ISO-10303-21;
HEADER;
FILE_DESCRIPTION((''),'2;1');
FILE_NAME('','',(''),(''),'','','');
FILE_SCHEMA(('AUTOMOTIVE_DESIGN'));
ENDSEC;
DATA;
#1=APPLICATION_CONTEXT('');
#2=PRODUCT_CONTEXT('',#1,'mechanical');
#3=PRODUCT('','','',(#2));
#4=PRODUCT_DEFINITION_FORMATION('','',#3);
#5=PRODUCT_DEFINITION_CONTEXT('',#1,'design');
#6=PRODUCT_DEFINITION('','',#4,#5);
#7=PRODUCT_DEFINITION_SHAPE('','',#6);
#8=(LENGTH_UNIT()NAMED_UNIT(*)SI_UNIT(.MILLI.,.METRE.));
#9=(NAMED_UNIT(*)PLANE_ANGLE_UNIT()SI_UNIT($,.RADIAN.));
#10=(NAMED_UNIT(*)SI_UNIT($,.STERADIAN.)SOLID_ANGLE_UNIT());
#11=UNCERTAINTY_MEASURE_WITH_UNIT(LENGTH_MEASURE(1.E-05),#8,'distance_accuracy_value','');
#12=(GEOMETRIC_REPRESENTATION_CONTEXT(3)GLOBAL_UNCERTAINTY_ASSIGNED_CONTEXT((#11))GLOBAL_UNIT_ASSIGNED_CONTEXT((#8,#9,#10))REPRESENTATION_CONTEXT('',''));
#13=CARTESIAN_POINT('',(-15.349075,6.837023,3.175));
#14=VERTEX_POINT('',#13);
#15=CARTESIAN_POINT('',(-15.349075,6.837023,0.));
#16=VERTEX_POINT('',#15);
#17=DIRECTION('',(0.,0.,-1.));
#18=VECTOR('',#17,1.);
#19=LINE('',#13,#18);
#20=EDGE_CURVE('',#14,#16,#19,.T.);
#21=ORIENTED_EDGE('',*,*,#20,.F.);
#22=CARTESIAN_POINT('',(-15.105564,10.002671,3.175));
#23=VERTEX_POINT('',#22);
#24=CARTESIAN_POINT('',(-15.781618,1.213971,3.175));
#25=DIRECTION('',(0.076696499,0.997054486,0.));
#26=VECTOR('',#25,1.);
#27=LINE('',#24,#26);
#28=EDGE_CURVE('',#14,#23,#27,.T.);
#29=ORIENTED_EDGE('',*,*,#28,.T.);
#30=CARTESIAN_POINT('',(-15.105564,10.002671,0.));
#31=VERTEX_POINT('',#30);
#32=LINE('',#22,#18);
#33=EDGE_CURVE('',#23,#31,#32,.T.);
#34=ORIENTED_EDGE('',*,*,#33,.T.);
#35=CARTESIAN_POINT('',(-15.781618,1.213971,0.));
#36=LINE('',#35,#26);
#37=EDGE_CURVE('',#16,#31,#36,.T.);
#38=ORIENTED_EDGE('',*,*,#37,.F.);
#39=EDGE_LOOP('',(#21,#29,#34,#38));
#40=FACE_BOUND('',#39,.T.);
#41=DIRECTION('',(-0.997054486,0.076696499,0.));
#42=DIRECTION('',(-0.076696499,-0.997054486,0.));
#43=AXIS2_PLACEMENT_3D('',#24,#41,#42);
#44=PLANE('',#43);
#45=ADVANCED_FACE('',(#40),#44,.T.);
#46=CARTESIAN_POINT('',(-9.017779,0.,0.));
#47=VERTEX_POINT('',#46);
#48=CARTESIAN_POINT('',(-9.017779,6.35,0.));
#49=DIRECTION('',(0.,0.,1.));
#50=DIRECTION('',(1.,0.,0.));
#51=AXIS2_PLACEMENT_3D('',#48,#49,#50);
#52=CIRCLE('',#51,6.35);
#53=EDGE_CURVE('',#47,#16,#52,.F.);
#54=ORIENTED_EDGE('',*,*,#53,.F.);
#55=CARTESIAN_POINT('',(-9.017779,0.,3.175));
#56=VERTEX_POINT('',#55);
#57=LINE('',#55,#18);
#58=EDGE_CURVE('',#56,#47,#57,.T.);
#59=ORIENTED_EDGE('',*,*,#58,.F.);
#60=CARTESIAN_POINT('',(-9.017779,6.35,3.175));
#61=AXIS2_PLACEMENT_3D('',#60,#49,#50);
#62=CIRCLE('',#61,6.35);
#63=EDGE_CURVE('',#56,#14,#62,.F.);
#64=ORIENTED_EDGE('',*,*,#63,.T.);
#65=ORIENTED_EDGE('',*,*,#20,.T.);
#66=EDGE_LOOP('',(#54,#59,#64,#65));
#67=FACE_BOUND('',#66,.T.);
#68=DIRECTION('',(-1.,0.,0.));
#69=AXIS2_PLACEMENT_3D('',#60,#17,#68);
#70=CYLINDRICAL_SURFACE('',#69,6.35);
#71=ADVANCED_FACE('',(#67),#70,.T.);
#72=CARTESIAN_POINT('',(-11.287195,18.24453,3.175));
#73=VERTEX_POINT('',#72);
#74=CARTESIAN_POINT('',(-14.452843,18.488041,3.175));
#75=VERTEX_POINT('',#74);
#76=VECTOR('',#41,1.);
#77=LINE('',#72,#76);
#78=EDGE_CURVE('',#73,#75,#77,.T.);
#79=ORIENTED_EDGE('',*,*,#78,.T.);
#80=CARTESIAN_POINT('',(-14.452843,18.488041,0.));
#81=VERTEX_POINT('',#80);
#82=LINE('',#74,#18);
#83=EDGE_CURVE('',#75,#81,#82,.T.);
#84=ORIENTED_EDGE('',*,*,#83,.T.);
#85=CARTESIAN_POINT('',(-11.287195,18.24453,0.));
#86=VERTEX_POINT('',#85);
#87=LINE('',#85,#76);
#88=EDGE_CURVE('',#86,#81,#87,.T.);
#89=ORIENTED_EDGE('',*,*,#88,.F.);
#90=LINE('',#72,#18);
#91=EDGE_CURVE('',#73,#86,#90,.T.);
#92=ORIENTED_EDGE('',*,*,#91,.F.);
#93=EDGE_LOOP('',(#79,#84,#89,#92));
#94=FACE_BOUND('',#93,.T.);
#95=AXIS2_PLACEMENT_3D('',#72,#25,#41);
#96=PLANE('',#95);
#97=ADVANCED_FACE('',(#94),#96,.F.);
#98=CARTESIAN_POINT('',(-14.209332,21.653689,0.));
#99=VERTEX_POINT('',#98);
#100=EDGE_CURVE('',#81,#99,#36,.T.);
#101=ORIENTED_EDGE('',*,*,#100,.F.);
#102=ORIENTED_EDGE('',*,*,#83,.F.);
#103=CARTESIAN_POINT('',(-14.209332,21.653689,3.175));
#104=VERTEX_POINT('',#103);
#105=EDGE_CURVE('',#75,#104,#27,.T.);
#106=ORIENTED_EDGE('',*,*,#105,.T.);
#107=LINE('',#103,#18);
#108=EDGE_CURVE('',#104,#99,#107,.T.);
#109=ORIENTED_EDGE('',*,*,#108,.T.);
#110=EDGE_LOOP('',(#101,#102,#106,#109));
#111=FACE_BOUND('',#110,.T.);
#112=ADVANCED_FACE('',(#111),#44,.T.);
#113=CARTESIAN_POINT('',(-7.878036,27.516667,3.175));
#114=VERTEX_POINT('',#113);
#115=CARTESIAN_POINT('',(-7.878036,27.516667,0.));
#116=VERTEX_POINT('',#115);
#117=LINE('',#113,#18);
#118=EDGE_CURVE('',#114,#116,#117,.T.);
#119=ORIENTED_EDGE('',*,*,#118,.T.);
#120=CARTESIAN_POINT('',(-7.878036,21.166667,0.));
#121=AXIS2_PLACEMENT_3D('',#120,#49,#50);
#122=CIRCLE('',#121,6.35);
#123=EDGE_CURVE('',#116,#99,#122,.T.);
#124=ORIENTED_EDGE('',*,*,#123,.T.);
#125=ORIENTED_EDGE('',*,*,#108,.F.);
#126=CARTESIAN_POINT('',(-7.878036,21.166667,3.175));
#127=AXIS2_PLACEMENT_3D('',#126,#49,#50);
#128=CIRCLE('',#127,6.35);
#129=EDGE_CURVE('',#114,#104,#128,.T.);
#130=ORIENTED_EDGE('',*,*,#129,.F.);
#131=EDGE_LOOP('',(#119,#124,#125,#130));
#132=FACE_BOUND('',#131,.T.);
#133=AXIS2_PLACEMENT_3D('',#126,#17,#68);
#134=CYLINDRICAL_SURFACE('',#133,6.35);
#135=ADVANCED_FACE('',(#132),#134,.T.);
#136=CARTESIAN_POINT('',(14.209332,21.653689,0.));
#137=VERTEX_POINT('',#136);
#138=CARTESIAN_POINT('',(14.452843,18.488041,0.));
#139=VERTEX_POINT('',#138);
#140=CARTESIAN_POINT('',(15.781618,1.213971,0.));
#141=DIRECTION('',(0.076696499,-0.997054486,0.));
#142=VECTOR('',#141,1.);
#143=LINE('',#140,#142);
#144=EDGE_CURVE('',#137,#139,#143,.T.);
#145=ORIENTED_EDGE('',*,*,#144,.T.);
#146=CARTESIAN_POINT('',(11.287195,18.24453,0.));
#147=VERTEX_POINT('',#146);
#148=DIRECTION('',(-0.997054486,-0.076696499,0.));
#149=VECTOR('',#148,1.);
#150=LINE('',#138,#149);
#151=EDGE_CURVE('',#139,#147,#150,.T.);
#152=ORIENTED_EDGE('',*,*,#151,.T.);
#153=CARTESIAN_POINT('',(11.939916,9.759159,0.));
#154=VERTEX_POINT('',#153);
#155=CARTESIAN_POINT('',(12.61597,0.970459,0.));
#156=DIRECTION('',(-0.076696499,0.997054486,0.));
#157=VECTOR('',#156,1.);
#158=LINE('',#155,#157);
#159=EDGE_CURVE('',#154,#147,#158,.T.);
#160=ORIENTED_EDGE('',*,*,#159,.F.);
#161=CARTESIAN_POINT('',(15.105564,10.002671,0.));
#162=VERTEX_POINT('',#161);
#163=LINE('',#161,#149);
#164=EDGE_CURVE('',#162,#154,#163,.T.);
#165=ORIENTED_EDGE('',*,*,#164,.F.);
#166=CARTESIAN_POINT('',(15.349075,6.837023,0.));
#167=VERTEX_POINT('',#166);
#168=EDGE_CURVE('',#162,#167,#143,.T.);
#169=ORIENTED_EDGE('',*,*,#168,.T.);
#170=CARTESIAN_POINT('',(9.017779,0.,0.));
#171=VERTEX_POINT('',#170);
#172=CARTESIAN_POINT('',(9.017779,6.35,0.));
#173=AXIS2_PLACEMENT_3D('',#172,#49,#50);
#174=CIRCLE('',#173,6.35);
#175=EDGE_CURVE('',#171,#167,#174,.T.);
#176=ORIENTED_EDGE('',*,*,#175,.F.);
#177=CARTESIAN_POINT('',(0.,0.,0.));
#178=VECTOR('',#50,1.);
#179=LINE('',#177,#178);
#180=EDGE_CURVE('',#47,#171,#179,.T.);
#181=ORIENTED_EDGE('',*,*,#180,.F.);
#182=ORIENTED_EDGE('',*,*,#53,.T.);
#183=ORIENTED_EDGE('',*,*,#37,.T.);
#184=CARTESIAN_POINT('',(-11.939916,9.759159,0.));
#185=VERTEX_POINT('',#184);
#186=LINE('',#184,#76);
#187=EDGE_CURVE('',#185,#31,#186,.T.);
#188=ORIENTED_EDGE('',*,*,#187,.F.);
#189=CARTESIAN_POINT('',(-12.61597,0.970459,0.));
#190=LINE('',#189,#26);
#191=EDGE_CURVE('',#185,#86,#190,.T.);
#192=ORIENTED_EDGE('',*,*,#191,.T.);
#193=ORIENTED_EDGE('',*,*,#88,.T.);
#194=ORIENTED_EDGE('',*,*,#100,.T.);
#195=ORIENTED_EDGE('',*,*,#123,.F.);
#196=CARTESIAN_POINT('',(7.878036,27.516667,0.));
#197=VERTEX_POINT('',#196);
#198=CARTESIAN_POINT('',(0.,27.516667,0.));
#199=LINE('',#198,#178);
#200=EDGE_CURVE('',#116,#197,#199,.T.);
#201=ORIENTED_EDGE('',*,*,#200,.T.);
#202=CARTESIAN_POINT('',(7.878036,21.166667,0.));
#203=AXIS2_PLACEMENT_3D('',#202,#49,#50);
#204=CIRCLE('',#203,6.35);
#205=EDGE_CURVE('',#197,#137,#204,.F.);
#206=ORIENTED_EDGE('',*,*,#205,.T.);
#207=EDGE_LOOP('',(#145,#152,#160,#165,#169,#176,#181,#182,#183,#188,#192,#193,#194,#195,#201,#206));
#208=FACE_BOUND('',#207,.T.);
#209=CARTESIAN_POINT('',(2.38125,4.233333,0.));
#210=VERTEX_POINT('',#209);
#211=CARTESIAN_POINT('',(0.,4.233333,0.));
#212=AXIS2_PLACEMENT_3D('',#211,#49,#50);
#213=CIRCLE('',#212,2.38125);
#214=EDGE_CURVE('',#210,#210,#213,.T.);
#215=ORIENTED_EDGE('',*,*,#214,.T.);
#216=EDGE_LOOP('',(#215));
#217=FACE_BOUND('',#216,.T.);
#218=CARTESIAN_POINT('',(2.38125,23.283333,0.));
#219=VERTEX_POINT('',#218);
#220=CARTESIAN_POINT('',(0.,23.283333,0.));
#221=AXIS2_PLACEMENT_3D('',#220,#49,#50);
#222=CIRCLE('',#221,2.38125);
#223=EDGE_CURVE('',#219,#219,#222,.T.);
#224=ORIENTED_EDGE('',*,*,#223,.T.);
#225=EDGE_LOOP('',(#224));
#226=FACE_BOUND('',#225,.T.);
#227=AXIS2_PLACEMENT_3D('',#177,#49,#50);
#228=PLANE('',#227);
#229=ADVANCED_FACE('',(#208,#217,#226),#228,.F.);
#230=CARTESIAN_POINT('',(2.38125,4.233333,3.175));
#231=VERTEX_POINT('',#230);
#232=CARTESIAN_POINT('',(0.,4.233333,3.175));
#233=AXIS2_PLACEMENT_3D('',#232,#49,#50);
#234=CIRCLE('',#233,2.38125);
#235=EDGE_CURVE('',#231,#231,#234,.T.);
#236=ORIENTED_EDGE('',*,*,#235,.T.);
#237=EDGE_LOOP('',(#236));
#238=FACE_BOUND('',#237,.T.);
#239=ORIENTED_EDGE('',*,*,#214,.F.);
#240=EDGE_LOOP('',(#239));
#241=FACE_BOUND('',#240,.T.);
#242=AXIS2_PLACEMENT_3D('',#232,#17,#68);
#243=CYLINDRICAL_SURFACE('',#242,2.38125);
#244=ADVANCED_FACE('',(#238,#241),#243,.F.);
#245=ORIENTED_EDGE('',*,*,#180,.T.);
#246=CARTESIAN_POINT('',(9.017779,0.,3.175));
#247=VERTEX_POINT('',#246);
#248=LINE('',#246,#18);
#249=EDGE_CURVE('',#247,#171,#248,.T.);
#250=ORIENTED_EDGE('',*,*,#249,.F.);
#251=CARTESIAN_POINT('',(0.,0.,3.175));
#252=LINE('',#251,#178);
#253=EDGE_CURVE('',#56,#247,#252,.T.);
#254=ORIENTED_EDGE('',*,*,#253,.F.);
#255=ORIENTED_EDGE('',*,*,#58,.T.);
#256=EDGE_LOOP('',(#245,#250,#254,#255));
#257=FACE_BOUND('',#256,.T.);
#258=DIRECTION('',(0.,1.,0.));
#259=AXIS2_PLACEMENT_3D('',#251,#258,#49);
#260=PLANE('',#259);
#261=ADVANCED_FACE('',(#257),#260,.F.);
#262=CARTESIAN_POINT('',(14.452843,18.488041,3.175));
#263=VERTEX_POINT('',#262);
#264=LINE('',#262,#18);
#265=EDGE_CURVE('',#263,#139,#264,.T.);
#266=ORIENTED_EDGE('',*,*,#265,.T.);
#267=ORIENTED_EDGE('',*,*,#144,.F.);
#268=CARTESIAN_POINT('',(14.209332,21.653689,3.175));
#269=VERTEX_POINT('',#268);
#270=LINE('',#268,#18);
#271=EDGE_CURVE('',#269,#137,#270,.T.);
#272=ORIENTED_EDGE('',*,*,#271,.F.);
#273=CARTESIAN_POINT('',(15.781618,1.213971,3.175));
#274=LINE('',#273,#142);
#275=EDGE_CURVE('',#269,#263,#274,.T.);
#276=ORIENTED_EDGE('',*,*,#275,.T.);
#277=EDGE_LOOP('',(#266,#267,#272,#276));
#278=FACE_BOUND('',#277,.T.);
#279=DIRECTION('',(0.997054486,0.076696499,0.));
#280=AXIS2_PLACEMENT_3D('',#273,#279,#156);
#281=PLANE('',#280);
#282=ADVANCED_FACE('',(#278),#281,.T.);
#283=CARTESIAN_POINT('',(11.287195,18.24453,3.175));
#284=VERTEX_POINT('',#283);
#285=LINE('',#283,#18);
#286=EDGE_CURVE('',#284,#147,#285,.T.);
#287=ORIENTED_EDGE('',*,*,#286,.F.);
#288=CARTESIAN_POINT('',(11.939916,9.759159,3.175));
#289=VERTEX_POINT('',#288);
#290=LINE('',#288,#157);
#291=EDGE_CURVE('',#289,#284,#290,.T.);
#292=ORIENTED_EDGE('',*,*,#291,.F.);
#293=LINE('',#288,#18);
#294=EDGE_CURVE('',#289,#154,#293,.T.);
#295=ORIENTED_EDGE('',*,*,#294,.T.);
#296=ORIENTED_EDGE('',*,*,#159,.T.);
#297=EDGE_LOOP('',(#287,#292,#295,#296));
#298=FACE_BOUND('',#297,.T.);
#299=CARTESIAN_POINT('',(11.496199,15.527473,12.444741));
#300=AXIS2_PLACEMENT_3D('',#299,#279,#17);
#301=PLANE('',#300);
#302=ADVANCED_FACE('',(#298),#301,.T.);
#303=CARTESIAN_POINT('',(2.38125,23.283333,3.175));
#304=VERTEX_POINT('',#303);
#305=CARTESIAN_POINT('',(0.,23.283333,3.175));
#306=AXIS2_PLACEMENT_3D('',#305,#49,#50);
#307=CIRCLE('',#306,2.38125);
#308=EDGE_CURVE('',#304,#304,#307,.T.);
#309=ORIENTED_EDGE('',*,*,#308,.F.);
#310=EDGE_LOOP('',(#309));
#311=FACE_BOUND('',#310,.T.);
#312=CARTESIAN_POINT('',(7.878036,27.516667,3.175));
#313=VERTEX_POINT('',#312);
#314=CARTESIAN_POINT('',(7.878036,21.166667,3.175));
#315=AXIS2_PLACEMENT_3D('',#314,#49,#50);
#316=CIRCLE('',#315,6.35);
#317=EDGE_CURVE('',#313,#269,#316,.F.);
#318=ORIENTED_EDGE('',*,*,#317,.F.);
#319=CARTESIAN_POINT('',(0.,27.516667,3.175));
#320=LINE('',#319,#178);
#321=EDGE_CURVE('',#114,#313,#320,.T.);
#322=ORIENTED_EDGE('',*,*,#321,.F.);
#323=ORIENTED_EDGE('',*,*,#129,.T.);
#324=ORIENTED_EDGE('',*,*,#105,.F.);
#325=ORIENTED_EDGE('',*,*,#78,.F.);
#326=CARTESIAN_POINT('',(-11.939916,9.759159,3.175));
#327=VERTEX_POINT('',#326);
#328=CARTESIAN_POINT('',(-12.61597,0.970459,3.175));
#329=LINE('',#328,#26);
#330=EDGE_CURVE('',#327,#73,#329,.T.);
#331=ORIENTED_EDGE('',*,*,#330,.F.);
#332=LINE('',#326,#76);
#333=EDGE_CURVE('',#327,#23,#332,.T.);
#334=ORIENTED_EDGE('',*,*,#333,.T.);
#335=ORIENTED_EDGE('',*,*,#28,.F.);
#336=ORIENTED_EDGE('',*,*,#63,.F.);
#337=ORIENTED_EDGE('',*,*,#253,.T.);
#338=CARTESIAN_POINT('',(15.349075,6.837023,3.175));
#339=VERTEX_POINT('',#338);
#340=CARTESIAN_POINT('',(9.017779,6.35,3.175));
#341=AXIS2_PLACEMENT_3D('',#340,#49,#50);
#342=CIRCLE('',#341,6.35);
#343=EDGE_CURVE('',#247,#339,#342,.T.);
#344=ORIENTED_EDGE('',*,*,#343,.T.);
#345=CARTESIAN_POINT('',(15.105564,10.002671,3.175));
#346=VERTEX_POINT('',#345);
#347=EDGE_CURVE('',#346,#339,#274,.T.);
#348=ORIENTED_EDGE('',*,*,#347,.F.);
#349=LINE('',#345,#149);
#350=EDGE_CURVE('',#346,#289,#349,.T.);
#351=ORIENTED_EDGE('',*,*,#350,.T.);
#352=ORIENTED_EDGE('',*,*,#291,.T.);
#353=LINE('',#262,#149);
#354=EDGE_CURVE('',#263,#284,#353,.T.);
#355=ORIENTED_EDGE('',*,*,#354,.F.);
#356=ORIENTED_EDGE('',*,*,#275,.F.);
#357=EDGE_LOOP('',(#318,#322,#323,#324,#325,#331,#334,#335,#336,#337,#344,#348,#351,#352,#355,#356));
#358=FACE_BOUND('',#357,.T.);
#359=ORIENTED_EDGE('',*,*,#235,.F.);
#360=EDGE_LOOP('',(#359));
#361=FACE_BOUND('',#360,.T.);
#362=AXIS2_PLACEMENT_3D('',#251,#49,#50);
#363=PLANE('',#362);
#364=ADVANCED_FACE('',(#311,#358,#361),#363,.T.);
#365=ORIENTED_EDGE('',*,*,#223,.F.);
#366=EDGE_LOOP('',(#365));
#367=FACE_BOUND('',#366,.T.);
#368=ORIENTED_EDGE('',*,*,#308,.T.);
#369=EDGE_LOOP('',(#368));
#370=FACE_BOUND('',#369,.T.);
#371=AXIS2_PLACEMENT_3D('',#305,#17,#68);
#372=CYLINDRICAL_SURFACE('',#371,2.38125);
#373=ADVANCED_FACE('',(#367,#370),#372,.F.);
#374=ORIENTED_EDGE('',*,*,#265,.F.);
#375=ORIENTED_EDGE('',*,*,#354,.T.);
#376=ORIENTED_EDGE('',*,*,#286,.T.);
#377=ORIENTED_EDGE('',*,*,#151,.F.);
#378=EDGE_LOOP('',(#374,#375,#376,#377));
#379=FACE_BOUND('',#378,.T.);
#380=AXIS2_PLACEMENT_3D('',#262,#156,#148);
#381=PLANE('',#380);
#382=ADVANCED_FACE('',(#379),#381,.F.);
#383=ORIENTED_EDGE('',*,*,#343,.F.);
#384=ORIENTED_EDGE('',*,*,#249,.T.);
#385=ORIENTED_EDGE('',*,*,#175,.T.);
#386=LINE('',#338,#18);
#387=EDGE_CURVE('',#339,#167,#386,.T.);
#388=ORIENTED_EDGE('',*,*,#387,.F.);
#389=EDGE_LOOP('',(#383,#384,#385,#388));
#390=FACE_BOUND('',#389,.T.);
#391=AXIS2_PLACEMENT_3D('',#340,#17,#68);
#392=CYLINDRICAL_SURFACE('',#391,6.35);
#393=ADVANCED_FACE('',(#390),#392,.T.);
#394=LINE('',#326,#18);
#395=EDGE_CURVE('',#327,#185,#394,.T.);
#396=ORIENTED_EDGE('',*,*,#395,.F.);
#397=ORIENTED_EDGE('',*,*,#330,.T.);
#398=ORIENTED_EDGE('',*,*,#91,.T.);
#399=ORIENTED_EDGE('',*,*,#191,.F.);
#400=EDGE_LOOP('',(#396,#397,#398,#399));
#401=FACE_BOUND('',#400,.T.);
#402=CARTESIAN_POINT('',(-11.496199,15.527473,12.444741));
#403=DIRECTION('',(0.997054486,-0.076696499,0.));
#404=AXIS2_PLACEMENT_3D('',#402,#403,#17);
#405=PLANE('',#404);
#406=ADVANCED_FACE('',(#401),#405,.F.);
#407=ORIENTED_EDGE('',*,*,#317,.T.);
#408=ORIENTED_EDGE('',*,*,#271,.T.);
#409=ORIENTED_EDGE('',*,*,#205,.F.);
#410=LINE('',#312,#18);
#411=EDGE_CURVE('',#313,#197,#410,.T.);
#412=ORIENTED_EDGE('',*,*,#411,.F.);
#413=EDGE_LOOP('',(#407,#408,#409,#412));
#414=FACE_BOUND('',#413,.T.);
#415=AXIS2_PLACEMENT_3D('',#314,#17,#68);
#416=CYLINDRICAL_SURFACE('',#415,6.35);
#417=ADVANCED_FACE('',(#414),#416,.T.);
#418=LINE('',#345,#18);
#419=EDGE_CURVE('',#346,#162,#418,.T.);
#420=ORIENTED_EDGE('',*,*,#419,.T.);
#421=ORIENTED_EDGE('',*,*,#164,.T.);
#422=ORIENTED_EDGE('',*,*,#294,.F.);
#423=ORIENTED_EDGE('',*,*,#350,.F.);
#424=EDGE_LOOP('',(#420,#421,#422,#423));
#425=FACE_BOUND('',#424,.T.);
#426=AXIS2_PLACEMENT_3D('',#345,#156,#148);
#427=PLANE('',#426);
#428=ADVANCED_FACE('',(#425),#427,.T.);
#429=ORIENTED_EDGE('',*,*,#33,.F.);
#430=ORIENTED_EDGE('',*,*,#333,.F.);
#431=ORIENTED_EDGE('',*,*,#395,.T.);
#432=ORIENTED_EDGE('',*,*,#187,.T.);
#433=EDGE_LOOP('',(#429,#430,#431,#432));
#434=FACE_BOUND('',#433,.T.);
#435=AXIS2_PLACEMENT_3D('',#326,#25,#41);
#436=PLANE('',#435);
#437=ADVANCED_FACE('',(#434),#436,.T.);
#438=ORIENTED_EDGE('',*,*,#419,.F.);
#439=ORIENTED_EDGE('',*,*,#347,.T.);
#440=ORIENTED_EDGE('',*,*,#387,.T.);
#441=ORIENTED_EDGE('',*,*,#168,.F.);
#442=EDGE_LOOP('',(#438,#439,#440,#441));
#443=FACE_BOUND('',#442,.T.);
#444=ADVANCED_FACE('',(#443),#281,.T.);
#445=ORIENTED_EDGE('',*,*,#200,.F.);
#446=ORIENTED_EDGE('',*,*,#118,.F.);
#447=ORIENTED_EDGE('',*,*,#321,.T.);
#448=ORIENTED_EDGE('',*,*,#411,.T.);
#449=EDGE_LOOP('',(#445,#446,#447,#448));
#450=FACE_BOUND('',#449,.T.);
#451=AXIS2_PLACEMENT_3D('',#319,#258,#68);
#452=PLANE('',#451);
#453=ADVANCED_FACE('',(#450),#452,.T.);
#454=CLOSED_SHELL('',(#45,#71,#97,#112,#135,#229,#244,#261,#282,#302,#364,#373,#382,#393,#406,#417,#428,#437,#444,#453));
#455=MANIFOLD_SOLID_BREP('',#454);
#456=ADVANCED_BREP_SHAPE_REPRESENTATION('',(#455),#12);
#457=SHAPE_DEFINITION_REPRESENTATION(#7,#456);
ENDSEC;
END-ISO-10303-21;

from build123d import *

# Parameters (mm, degrees)
BOSS_EXTRUDE1_DEPTH = 3.175
CAVITY1_DEPTH       = 3.175


# Read off the part's stored shape, not the designer's step: Cavity1
with BuildPart() as part:
    # Sketch1 → Boss-Extrude1 (new body)
    with BuildSketch(Plane.XY):
        with BuildLine():
            Line((-9.017779189, 0), (0, 0))
            Line((0, 0), (0, 1.852083291))
            ThreePointArc((0, 1.852083291), (-2.38125, 4.233333291), (0, 6.614583291))
            Line((0, 6.614583291), (0, 20.902083291))
            ThreePointArc((0, 20.902083291), (-2.38125, 23.283333291), (0, 25.664583291))
            Line((0, 25.664583291), (0, 27.516666667))
            Line((0, 27.516666667), (-7.878035599, 27.516666667))
            ThreePointArc((-7.878035599, 27.516666667), (-12.19254052, 25.825802562), (-14.209331582, 21.653689435))
            Line((-14.209331582, 21.653689435), (-15.349075172, 6.837022768))
            ThreePointArc((-15.349075172, 6.837022768), (-13.676915084, 2.035495079), (-9.017779189, 0))
        make_face()
        with BuildLine():
            Line((0, 1.852083291), (0, 0))
            Line((0, 0), (9.017779189, 0))
            ThreePointArc((9.017779189, 0), (13.676915084, 2.035495079), (15.349075172, 6.837022768))
            Line((15.349075172, 6.837022768), (14.209331582, 21.653689435))
            ThreePointArc((14.209331582, 21.653689435), (12.19254052, 25.825802562), (7.878035599, 27.516666667))
            Line((7.878035599, 27.516666667), (0, 27.516666667))
            Line((0, 27.516666667), (0, 25.664583291))
            ThreePointArc((0, 25.664583291), (1.683798023, 24.967131314), (2.38125, 23.283333291))
            ThreePointArc((2.38125, 23.283333291), (1.683798023, 21.599535268), (0, 20.902083291))
            Line((0, 20.902083291), (0, 6.614583291))
            ThreePointArc((0, 6.614583291), (1.683798023, 5.917131314), (2.38125, 4.233333291))
            ThreePointArc((2.38125, 4.233333291), (1.683798023, 2.549535268), (0, 1.852083291))
        make_face()
    extrude(amount=BOSS_EXTRUDE1_DEPTH)

    # Cavity1 outline → Cavity1 (cut)
    with BuildSketch(Plane.XY):
        Polygon((11.287194974, 18.244530059), (11.939915796, 9.759159375), (15.105563788, 10.002670759), (14.452842966, 18.488041443), align=None)
        Polygon((-15.105563788, 10.002670759), (-11.939915796, 9.759159375), (-11.287194974, 18.244530059), (-14.452842966, 18.488041443), align=None)
    extrude(amount=CAVITY1_DEPTH, mode=Mode.SUBTRACT)


solid = part.part
